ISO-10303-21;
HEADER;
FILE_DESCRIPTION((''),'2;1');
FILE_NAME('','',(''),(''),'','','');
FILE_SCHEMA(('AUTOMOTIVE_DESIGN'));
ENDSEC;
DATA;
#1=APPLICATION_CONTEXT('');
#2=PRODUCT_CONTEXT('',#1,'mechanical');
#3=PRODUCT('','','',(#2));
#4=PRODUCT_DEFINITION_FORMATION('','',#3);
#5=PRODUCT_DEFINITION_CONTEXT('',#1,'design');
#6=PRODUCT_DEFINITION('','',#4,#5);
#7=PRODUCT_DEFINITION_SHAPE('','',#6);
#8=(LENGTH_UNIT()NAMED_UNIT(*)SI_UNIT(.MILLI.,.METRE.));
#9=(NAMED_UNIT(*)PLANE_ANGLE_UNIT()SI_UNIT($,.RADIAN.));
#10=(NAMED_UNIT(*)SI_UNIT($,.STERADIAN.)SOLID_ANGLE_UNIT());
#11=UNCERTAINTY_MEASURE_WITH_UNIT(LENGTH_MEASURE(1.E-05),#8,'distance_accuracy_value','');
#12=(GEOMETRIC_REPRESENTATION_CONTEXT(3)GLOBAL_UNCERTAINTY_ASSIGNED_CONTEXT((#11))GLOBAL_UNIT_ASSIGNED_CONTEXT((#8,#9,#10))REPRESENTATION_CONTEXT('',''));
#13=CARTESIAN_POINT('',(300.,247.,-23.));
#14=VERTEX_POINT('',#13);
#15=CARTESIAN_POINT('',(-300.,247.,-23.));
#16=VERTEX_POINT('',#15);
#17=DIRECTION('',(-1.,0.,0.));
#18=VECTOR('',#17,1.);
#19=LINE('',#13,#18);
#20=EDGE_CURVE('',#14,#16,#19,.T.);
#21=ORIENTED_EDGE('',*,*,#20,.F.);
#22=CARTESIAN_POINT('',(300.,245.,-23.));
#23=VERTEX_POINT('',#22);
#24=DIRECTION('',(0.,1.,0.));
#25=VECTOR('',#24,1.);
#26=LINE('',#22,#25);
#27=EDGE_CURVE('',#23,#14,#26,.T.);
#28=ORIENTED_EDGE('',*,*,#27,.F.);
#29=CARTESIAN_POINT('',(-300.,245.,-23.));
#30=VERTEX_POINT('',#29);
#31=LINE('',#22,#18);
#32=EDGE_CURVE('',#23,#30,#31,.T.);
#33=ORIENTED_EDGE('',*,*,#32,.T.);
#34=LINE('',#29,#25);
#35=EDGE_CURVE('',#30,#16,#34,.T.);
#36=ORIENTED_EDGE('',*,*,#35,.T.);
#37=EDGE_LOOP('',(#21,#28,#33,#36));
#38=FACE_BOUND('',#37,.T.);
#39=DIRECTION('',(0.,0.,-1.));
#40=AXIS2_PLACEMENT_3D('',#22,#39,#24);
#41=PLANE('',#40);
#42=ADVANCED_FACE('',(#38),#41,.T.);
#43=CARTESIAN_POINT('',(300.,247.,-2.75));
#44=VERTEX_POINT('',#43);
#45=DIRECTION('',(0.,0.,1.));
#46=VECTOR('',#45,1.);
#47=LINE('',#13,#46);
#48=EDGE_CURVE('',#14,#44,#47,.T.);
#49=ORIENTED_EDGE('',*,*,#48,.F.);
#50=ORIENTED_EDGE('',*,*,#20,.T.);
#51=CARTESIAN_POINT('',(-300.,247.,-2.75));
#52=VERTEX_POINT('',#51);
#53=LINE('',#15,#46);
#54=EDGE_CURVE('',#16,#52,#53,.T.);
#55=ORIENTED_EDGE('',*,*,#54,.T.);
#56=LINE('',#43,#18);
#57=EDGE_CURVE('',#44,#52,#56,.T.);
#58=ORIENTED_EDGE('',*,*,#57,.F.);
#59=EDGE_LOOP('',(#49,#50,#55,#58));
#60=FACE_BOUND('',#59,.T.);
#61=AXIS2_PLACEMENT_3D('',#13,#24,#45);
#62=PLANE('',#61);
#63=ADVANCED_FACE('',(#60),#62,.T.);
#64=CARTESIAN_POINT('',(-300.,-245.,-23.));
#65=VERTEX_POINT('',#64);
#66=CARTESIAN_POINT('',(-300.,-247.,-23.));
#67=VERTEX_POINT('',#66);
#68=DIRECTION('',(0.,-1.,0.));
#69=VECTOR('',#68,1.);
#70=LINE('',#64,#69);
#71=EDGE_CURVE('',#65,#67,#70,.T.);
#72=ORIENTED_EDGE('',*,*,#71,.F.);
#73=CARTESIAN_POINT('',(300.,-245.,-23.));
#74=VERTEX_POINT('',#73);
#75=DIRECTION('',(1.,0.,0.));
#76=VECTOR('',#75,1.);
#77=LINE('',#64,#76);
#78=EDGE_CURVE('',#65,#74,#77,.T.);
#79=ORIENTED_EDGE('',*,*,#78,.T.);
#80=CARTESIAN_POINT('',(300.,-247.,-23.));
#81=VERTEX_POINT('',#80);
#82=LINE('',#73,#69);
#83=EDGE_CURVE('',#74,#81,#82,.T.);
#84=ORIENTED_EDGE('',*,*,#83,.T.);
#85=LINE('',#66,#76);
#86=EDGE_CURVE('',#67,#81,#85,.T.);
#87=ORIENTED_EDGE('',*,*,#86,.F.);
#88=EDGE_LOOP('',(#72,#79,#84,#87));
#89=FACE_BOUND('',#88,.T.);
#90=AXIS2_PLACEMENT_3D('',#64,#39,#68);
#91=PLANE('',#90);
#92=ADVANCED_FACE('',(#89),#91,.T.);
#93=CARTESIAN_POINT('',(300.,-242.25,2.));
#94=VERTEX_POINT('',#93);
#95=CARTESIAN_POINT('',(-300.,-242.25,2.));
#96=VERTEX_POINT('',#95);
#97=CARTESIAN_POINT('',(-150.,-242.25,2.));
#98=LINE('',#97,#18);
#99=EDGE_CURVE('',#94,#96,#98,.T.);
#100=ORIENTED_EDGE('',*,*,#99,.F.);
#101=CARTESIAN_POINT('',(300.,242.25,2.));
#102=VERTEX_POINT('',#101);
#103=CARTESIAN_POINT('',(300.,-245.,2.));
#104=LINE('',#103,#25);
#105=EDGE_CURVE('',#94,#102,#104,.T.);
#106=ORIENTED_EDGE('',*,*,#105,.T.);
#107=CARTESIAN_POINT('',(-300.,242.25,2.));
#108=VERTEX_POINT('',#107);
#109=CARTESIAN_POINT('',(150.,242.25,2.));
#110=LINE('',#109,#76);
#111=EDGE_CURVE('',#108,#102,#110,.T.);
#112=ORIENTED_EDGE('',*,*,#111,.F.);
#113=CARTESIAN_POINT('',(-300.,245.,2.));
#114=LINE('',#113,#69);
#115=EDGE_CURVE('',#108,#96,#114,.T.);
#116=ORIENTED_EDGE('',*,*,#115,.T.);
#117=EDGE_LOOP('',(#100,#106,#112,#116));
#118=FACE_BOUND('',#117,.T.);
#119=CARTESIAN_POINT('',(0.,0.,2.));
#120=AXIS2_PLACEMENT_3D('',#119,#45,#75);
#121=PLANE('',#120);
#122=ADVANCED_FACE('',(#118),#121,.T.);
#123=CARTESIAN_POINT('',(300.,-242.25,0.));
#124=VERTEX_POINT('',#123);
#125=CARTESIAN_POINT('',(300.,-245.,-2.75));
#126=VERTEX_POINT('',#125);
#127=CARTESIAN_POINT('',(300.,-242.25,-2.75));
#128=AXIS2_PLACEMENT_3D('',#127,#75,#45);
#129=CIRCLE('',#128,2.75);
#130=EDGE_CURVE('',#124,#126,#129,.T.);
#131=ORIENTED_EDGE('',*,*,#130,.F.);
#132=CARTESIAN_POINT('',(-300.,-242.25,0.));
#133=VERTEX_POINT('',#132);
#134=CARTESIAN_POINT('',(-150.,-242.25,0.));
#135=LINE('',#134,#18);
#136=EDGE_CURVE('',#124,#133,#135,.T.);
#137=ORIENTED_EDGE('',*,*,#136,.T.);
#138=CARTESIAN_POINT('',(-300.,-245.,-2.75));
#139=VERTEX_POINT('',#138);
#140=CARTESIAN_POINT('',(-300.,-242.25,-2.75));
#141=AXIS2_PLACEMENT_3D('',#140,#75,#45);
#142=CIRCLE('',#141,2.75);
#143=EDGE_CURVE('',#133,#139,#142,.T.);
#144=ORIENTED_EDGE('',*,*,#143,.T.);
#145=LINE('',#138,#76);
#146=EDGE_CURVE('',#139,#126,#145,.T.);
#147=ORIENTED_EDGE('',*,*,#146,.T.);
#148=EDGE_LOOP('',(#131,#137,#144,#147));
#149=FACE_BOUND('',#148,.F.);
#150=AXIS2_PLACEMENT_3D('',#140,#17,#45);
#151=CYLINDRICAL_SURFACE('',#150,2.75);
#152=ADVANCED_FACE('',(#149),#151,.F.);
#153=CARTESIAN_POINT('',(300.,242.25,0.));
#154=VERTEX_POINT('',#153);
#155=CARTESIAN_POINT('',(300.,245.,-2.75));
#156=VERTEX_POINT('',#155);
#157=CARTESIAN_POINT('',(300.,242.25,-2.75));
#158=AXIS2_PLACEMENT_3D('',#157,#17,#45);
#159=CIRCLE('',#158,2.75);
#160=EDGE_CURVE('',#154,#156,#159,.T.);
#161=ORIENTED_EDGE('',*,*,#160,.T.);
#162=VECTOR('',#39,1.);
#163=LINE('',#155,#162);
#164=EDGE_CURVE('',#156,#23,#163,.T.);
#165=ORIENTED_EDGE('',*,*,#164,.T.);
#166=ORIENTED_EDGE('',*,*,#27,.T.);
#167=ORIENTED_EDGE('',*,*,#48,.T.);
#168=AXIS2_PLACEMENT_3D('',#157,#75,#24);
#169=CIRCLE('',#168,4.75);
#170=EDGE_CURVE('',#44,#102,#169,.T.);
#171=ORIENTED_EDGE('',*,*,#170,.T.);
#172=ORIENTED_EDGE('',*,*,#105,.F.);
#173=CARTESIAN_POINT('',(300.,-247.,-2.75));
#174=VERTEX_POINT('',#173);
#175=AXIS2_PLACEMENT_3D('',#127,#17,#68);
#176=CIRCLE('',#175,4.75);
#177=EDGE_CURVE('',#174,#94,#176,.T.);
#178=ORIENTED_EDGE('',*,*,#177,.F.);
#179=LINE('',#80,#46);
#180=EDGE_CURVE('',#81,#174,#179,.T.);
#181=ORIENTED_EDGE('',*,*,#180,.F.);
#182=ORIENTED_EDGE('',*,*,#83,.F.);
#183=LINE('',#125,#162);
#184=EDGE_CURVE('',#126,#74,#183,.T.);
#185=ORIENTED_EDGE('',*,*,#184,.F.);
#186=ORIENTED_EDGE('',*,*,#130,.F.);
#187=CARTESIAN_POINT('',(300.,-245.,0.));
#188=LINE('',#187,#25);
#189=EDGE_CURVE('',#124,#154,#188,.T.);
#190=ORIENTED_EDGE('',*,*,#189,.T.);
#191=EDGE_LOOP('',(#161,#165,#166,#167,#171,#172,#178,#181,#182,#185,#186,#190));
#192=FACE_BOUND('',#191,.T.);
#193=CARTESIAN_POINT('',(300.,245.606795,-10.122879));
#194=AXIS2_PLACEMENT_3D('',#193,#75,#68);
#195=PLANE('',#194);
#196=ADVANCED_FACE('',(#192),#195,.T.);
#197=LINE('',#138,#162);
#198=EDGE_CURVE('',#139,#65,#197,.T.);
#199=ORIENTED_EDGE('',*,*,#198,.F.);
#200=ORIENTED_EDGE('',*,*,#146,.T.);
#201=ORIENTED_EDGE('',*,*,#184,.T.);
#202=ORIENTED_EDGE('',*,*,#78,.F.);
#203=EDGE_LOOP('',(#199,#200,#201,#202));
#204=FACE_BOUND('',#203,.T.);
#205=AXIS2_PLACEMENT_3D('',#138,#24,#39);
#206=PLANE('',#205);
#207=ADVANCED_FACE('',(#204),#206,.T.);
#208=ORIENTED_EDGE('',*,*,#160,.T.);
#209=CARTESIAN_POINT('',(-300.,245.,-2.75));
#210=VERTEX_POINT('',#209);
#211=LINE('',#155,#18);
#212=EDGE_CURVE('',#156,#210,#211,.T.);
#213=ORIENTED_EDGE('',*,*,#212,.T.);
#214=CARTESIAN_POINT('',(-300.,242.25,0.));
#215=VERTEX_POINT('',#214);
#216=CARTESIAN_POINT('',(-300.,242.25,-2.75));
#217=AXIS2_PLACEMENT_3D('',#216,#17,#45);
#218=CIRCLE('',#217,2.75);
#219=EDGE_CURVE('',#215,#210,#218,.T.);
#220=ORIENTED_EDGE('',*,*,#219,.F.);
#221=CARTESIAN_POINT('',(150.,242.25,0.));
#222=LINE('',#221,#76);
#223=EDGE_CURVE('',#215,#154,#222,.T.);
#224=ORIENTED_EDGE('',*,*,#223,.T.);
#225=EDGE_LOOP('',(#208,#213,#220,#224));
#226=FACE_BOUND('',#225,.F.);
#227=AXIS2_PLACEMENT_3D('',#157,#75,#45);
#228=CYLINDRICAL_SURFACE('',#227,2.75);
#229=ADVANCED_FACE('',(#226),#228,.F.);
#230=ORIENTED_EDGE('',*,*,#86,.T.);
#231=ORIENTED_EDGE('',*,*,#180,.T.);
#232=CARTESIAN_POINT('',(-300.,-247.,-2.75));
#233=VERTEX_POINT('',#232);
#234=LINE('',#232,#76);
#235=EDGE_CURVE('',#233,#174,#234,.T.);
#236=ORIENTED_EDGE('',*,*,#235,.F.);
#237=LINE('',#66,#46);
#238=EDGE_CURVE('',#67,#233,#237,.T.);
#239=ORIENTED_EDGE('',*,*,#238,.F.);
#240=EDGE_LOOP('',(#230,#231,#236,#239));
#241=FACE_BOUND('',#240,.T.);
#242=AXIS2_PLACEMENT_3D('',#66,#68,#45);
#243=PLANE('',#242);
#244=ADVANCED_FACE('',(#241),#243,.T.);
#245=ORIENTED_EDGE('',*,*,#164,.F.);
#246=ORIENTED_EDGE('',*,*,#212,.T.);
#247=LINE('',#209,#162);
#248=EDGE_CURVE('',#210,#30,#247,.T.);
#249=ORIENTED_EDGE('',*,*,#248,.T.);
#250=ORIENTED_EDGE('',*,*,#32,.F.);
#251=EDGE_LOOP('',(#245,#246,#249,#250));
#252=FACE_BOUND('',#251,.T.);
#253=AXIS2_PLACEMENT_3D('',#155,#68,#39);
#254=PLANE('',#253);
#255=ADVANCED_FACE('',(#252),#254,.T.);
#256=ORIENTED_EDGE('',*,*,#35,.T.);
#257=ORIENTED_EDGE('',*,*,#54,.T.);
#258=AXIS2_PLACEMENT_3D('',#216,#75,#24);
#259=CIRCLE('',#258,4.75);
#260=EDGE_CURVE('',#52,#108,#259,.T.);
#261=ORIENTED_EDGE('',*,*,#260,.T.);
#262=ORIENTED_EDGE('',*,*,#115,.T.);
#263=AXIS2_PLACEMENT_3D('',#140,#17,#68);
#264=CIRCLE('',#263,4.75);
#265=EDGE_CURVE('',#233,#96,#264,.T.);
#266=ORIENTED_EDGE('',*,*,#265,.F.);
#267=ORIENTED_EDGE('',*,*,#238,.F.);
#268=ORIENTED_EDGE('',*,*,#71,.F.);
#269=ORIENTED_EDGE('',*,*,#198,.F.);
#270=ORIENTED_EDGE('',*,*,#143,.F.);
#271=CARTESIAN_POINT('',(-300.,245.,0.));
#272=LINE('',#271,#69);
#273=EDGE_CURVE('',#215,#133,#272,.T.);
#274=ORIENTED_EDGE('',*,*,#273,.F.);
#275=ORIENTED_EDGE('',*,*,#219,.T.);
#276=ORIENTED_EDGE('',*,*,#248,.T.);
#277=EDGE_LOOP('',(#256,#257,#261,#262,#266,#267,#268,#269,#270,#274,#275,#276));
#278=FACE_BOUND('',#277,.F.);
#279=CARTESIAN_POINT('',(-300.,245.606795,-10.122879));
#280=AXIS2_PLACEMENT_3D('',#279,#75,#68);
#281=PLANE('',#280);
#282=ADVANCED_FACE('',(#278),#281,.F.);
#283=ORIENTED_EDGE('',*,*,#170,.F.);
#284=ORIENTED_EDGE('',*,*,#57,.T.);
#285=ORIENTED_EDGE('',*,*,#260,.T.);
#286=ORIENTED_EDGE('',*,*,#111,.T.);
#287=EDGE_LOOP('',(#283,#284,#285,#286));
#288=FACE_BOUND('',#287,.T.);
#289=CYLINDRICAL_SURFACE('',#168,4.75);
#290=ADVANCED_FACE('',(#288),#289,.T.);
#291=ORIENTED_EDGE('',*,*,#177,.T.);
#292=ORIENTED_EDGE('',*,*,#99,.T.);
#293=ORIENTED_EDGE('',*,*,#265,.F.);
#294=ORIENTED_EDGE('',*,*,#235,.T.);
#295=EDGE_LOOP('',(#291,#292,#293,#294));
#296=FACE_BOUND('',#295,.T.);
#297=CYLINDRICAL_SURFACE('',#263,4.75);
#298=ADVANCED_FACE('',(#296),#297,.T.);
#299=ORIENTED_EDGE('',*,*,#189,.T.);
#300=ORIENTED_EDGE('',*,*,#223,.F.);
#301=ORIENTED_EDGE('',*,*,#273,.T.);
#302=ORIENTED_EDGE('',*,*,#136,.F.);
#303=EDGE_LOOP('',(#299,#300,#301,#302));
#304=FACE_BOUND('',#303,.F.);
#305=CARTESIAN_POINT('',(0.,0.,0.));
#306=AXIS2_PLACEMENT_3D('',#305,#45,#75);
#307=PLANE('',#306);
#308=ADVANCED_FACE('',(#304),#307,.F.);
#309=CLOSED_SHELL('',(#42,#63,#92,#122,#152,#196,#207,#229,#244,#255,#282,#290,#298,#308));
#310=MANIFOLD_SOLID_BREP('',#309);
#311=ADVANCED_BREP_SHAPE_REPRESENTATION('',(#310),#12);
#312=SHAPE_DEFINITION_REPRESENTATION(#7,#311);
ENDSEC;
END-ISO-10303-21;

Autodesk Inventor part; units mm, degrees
ref_plane "YZ Plane" through (0, 0, 0) normal (1, 0, 0) x (0, 1, 0)
ref_plane "XZ Plane" through (0, 0, 0) normal (0, 1, 0) x (-1, 0, 0)
ref_plane "XY Plane" through (0, 0, 0) normal (0, 0, 1) x (1, 0, 0)
sketch "Sketch1" plane through (0, 0, 0) normal (0, 0, 1) x (1, 0, 0)
  line L0 (-300, -245) -> (300, -245)
  line L1 (300, -245) -> (300, 245)
  line L2 (300, 245) -> (-300, 245)
  line L3 (-300, 245) -> (-300, -245)
  line L4 (-300, -245) -> (300, 245) construction
  line L5 (300, -245) -> (-300, 245) construction
  point P0 (0, 0)
  dimension "d0" = 600
  dimension "d1" = 490
extrude "Plate1" add sketch "Sketch1" along normal blind 2
sketch "Sketch2" plane through (0, 0, 0) normal (0, 0, -1) x (-1, 0, 0)
  line L0 (-280, 225) -> (-80, 225) construction
  line L1 (-80, 225) -> (-80, 205) construction
  line L2 (-80, 205) -> (-280, 205) construction
  line L3 (-280, 205) -> (-280, 225) construction
  line L4 (-300, 245) -> (300, 245) projected
  line L5 (-300, -245) -> (-300, 245) projected
  point P0 (0, 0)
  point P1 (-48, 100)
  point P2 (300, 245)
  point P3 (-50, 98)
  dimension "d6" = 200
  dimension "d9" = 20
  dimension "d10" = 20
  dimension "d11" = 20
mark "Mark1"
sketch "Sketch3" plane through (-300, 247, 2) normal (0, -1, 0) x (1, 0, 0)
  line L0 (600, 0) -> (0, 0)
  line L1 (0, 0) -> (0, 25)
  line L2 (0, 25) -> (600, 25)
  line L3 (600, 25) -> (600, 0)
edge flange "Flange1" height 25 angle 90 thickness 2 bend radius 2.75 thickness toward (0, -1, 0) relief round relief width 2 relief depth 1 corner gap 2.75 corner form 0 edges at (0, 245, 2) (0, -245, 2) wall of the first edge with corners at (300, 247, 2) (-300, 247, 2) (-300, 247, -23) (300, 247, -23)
bend "Bend1"
corner "Corner1"
equation "\"d2\" = Thickness"
equation "\"d12\" = BendReliefWidth"
equation "\"d13\" = BendReliefDepth"
equation "\"d14\" = MinimumRemnant"
equation "\"d15\" = TransitionRadius"
equation "\"d18\" = BendRadius"
equation "\"d19\" = CornerReliefSize"
equation "\"d20\" = GapSize"
equation "\"d21\" = JacobiRadiusSize"
equation "\"BendReliefWidth\" = Thickness"
equation "\"BendReliefDepth\" = 0.5 * Thickness"
equation "\"CornerReliefSize\" = 4 * Thickness"
equation "\"MinimumRemnant\" = 2 * Thickness"
equation "\"TransitionRadius\" = BendRadius"
equation "\"JacobiRadiusSize\" = BendRadius"
equation "\"GapSize\" = Thickness"
equation "\"Thickness\" = 2"
equation "\"BendRadius\" = 2.75"
properties part number "TRM 025 left board damper" material "AISI 304"
